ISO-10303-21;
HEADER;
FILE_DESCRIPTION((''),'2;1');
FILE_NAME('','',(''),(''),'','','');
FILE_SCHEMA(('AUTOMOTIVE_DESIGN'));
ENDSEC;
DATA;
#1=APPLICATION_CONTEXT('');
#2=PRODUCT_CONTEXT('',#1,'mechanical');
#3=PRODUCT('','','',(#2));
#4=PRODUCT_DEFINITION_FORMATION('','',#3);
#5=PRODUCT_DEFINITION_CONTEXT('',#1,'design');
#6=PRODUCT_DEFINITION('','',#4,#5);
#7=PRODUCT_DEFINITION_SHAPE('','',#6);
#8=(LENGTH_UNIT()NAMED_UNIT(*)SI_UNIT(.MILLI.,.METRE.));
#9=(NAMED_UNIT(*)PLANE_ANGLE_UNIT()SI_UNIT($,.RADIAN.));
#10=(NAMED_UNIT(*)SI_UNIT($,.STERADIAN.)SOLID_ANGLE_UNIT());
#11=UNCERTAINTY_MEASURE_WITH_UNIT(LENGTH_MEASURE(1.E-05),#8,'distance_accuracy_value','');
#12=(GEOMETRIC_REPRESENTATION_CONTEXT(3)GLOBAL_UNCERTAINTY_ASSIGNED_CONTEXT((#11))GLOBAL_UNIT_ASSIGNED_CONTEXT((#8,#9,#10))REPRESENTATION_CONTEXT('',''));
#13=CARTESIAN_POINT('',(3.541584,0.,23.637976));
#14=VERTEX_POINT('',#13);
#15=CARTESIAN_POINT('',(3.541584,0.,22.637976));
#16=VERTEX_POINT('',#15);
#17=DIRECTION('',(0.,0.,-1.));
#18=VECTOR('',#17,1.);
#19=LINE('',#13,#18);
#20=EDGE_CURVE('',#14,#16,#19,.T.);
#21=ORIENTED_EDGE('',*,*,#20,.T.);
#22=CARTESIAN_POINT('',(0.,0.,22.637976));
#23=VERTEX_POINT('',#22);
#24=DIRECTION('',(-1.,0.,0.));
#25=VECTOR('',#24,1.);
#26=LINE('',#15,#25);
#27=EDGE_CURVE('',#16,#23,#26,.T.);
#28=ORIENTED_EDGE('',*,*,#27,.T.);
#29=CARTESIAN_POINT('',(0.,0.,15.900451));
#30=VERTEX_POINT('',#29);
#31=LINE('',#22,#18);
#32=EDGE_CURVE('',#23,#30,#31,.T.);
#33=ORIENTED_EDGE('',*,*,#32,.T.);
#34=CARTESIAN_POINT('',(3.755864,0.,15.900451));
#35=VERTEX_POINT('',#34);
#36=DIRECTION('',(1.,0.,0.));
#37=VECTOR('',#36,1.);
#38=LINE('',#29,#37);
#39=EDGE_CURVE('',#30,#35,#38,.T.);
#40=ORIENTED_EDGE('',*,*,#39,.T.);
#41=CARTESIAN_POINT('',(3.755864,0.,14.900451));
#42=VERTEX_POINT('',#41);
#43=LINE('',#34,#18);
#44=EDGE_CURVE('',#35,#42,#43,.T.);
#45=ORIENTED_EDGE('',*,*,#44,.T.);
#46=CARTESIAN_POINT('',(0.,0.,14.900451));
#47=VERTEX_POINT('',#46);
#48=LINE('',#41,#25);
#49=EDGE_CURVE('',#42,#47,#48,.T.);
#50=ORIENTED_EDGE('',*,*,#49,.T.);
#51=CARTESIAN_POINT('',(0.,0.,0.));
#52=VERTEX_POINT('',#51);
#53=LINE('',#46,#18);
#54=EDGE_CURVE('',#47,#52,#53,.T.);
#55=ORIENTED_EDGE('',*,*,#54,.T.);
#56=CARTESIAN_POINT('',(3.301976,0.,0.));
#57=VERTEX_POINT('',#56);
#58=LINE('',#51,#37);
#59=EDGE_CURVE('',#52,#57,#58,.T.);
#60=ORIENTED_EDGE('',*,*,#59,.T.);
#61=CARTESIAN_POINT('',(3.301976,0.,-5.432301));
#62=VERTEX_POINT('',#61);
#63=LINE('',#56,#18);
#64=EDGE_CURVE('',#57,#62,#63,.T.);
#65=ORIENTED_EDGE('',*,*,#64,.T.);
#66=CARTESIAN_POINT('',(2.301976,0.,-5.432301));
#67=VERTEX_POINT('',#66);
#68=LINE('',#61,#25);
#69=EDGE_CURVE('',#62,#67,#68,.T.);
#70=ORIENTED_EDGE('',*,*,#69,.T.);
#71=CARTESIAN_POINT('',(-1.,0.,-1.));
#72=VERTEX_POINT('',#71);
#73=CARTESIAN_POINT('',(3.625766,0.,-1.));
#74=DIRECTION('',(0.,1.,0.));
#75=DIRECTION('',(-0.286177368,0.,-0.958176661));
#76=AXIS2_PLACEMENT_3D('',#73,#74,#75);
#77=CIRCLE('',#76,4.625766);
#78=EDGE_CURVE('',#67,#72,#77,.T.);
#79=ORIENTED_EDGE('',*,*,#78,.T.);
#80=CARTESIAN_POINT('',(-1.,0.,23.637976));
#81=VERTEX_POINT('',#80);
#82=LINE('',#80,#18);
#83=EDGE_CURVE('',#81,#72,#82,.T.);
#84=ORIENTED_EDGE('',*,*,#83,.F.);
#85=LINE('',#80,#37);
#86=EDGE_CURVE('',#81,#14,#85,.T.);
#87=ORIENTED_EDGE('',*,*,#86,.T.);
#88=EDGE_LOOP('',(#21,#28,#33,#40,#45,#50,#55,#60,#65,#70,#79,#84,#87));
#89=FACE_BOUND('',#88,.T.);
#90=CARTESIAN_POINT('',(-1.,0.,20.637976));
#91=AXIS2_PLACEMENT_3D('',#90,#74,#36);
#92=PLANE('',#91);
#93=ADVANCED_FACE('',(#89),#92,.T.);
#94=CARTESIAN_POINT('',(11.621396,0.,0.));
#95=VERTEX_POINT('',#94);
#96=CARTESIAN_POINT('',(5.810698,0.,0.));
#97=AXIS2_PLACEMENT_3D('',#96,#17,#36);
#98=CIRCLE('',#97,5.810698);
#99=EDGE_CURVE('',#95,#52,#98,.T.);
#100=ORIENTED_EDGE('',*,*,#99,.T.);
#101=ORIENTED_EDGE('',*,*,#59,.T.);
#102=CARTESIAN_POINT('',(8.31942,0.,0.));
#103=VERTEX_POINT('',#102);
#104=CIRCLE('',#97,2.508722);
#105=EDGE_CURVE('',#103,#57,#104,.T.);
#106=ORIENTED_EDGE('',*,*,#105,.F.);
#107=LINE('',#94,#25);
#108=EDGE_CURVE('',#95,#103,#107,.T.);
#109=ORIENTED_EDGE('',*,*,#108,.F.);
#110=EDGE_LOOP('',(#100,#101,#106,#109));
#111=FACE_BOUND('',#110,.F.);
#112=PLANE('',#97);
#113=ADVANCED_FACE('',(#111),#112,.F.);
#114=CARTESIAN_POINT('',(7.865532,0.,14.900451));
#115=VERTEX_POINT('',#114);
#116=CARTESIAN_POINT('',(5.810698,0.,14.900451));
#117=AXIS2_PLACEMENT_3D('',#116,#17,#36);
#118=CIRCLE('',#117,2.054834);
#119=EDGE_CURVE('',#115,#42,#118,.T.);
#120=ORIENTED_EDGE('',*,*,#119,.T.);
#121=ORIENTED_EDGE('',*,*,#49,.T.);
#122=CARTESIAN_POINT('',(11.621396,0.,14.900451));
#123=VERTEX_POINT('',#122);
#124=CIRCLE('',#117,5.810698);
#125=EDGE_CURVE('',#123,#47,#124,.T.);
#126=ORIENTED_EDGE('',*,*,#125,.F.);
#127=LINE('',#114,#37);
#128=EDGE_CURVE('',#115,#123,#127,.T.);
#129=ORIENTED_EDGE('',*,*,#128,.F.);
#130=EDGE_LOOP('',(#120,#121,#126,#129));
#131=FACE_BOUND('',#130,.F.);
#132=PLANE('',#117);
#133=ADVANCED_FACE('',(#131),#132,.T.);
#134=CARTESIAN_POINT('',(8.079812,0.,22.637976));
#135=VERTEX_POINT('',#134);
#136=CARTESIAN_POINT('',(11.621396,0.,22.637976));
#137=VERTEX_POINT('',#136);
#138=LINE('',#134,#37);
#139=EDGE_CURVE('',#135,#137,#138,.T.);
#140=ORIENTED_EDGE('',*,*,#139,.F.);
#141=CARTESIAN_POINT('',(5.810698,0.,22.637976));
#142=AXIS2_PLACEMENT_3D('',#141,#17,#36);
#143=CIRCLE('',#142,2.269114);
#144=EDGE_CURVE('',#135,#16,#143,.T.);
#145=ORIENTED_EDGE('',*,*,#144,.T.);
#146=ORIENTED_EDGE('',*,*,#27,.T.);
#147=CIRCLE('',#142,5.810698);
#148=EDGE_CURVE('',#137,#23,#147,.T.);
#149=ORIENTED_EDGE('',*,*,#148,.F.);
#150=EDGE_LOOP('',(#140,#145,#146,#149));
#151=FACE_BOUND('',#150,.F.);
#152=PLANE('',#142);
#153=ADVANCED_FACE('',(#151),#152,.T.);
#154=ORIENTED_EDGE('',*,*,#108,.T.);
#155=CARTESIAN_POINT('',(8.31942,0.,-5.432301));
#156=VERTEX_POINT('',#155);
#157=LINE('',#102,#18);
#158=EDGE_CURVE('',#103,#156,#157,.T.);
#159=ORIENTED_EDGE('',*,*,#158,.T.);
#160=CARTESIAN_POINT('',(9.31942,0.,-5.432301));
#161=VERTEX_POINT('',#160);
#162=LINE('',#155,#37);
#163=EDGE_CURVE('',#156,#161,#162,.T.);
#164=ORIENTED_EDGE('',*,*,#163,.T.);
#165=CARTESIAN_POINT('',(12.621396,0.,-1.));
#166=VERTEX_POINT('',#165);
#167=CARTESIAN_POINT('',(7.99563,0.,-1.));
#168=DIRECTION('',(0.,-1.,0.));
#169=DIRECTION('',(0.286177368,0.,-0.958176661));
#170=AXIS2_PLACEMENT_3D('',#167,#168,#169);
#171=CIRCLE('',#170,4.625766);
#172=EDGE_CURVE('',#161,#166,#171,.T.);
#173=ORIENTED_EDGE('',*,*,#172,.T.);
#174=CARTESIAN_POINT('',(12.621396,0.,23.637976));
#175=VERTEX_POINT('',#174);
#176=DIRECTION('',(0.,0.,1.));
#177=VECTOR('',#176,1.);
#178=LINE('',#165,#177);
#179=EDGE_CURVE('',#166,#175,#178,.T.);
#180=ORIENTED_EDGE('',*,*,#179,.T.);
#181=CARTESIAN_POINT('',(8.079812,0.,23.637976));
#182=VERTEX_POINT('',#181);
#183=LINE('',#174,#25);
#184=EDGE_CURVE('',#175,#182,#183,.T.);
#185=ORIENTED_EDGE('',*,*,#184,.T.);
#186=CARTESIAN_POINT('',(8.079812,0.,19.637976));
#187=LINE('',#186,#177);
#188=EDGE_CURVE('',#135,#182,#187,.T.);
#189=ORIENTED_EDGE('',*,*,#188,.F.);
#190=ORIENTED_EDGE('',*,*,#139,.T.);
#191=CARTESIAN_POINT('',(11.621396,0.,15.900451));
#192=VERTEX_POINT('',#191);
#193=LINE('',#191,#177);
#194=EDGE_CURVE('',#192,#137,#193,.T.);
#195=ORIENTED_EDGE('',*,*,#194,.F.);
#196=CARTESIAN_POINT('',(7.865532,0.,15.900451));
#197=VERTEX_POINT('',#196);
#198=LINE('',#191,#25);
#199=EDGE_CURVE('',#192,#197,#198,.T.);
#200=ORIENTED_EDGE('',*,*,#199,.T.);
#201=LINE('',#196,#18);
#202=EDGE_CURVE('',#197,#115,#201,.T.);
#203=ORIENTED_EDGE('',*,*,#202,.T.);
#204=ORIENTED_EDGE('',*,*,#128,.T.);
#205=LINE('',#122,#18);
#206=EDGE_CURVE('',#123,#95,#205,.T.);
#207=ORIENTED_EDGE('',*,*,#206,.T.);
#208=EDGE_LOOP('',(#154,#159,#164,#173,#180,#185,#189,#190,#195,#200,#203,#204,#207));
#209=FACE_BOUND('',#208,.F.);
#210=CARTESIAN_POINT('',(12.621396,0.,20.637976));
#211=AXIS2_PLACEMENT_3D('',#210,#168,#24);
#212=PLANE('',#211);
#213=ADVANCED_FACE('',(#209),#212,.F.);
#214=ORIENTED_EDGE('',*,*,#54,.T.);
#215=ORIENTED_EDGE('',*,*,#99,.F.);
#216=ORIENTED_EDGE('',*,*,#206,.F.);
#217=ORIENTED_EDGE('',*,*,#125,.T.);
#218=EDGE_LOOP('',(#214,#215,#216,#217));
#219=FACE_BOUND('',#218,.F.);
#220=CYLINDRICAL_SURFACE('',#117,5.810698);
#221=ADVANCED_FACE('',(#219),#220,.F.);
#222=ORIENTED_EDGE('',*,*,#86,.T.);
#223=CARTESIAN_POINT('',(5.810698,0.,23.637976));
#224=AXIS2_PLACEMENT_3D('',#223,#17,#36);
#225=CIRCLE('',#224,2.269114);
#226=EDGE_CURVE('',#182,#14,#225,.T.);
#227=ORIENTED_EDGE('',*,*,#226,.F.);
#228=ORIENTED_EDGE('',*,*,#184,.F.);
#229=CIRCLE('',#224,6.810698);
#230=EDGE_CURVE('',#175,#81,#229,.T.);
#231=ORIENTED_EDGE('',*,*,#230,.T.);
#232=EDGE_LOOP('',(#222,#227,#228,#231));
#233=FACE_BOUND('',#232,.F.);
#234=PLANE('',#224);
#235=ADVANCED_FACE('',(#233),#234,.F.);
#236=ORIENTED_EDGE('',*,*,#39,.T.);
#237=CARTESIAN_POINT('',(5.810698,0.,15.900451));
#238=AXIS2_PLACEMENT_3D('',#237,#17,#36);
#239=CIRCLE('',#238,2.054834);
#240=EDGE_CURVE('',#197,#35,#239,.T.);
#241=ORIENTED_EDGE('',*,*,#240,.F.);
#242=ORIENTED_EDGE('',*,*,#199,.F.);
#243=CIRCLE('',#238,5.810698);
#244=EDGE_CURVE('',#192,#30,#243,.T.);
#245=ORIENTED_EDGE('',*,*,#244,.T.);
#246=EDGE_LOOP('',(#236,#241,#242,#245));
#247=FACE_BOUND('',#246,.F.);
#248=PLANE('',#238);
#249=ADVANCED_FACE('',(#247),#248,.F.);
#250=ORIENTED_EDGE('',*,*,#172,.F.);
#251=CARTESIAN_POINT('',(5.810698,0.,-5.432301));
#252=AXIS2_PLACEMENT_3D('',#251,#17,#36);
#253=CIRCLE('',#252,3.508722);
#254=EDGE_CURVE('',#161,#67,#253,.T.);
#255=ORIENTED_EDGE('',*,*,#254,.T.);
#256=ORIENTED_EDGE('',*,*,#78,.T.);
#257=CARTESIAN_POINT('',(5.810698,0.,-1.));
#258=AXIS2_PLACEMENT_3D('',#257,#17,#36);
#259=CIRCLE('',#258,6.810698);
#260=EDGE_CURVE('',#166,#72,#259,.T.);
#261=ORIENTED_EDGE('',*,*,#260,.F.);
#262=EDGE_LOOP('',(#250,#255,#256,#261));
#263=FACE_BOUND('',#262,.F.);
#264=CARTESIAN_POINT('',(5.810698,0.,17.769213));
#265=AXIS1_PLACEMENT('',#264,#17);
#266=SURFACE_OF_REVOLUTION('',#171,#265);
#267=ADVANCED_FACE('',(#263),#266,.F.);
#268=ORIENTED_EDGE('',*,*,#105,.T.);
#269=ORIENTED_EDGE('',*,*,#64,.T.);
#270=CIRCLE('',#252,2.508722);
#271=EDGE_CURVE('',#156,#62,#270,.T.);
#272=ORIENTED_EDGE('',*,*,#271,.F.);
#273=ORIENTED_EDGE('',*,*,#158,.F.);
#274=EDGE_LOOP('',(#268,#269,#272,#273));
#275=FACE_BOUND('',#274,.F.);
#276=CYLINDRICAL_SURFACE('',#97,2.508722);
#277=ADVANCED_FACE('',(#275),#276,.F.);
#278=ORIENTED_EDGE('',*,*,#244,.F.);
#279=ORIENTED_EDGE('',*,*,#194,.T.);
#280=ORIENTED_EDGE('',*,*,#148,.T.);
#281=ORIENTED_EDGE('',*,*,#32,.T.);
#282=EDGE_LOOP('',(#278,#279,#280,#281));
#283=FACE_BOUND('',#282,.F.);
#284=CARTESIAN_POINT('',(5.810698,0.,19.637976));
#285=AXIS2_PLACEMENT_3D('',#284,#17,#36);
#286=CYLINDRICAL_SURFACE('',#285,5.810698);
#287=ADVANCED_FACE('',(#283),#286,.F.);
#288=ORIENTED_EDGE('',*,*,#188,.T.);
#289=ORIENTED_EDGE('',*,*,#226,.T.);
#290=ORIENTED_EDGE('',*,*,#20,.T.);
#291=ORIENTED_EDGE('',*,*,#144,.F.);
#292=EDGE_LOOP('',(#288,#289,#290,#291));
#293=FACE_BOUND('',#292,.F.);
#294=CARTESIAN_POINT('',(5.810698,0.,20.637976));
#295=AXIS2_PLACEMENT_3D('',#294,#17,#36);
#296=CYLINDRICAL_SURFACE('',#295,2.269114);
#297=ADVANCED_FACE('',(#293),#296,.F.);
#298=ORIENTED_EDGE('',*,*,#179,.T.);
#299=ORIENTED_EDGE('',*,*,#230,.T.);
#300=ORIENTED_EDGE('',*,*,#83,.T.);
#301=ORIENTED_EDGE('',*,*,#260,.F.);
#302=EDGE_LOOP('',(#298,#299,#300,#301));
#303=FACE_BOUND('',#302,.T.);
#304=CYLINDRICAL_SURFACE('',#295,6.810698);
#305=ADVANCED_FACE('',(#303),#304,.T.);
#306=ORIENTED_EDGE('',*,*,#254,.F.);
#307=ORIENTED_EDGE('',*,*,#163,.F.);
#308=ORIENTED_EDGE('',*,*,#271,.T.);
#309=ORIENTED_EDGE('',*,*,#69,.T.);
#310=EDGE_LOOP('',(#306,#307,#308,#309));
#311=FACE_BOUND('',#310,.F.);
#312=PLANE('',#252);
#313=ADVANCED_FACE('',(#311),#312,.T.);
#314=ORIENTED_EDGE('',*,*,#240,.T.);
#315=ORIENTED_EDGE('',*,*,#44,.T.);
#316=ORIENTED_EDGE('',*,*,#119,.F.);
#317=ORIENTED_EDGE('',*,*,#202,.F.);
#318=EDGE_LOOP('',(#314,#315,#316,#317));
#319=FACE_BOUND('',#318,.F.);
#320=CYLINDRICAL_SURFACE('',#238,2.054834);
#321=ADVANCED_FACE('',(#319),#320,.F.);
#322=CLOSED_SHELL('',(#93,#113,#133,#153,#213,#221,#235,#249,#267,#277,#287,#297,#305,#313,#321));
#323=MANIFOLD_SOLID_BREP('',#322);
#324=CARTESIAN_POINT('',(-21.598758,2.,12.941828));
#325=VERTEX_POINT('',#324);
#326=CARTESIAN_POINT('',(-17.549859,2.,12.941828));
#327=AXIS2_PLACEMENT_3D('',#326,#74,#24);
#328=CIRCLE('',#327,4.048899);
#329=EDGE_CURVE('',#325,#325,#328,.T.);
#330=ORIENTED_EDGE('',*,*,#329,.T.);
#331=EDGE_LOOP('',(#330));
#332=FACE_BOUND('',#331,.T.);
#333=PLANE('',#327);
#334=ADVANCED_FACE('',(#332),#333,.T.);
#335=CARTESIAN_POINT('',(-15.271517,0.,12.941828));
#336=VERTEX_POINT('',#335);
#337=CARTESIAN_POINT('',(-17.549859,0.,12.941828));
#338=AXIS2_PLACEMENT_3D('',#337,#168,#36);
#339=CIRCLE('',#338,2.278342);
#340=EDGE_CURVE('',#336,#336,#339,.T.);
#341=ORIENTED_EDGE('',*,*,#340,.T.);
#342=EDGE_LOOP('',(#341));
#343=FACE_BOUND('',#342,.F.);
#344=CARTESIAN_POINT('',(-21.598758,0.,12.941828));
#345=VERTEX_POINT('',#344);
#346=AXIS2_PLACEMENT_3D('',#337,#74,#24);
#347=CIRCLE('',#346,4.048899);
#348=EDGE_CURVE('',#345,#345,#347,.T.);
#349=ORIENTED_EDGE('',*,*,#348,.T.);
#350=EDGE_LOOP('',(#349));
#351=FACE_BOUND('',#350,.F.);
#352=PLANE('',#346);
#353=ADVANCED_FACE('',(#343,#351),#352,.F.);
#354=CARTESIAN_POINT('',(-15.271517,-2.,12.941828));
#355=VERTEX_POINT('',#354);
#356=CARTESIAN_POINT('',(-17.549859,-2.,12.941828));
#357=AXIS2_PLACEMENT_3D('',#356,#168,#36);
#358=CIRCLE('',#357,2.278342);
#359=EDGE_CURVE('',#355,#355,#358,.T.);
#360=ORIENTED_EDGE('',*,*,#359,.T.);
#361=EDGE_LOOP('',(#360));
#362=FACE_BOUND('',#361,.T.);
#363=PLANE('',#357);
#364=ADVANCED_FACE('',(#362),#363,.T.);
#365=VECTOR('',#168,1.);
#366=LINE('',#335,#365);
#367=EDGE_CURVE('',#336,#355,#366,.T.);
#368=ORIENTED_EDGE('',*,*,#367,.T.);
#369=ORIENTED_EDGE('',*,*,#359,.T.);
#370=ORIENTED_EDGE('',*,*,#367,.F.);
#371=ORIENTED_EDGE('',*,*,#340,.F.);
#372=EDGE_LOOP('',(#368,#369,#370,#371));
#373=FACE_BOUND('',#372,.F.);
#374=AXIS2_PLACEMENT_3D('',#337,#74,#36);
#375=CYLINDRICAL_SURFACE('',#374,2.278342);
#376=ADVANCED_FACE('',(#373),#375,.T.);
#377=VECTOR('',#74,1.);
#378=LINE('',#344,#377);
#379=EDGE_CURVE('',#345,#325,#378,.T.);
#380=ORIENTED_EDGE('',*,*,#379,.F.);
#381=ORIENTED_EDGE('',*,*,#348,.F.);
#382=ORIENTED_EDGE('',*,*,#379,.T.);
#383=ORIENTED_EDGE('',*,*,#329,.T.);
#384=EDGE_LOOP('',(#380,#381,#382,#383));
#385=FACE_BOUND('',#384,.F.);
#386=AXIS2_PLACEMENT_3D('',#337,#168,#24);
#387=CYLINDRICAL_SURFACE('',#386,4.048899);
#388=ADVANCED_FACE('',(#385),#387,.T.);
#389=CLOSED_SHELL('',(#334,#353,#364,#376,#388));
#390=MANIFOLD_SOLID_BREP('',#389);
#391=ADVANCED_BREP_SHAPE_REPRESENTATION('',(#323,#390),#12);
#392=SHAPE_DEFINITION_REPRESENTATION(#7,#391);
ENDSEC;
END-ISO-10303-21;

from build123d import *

# Parameters (mm, degrees)
F1_ANGLE = 180
F2_DEPTH = 3
F3_DEPTH = 3
F4_R     = 2.2783423097
F5_DEPTH = 2
F6_R     = 4.0488985141
F6_R_2   = 2.2783423097
F7_DEPTH = 2


with BuildPart() as f1:
    # F0 (on Front) → F1 (revolve)
    with BuildSketch(Plane.XZ):
        with BuildLine():
            Line((11.6213960573, 14.9004508704), (11.6213960573, 0))
            Line((11.6213960573, 0), (8.3194198087, 0))
            Line((8.3194198087, 0), (8.3194198087, -1))
            Line((8.3194198087, -1), (8.3194198087, -5.4323007353))
            Line((8.3194198087, -5.4323007353), (9.3194198087, -5.4323007353))
            ThreePointArc((9.3194198087, -5.4323007353), (11.7051618742, -3.7635274992), (12.6213960573, -1))
            Line((12.6213960573, -1), (12.6213960573, 15.9004508704))
            Line((12.6213960573, 15.9004508704), (12.6213960573, 19.6379758418))
            Line((12.6213960573, 19.6379758418), (12.6213960573, 20.6379758418))
            Line((12.6213960573, 20.6379758418), (8.0798119307, 20.6379758418))
            Line((8.0798119307, 20.6379758418), (8.0798119307, 19.6379758418))
            Line((8.0798119307, 19.6379758418), (11.6213960573, 19.6379758418))
            Line((11.6213960573, 19.6379758418), (11.6213960573, 15.9004508704))
            Line((11.6213960573, 15.9004508704), (9.7232601838, 15.9004508704))
            Line((9.7232601838, 15.9004508704), (7.8655318357, 15.9004508704))
            Line((7.8655318357, 15.9004508704), (7.8655318357, 14.9004508704))
            Line((7.8655318357, 14.9004508704), (9.7232601838, 14.9004508704))
            Line((9.7232601838, 14.9004508704), (11.6213960573, 14.9004508704))
        make_face()
    revolve(axis=Axis((5.8106980287, 0, 17.7692133561), (0, 0, -1)), revolution_arc=F1_ANGLE)

    # F2 (add): a face of the model
    f2_faces = [f1.faces().sort_by_distance(p)[0] for p in [
        (5.8106980287, -3.1312214854, 20.6379758418),
    ]]
    extrude(f2_faces, amount=F2_DEPTH)

    # F3 (cut): a face of the model
    f3_faces = [f1.faces().sort_by_distance(p)[0] for p in [
        (5.8106980287, -2.7365950697, 19.6379758418),
    ]]
    extrude(f3_faces, amount=-F3_DEPTH, mode=Mode.SUBTRACT)


with BuildPart() as f5:
    # F4 (on Front) → F5 (new body)
    with BuildSketch(Plane.XZ):
        with Locations((-17.5498593599, 12.9418279976)):
            Circle(F4_R)
    extrude(amount=F5_DEPTH)

    # F6 (on face) → F7 (join)
    with BuildSketch(Plane(origin=(0, 0, 0), x_dir=(-1, 0, 0), z_dir=(0, 1, 0))):
        with Locations((17.5498593599, 12.9418279976)):
            Circle(F6_R)
        with Locations((17.5498593599, 12.9418279976)):
            Circle(F6_R_2, mode=Mode.SUBTRACT)
        with Locations((17.5498593599, 12.9418279976)):
            Circle(F6_R_2)
    extrude(amount=F7_DEPTH)


solid = Compound([f1.part, f5.part])
